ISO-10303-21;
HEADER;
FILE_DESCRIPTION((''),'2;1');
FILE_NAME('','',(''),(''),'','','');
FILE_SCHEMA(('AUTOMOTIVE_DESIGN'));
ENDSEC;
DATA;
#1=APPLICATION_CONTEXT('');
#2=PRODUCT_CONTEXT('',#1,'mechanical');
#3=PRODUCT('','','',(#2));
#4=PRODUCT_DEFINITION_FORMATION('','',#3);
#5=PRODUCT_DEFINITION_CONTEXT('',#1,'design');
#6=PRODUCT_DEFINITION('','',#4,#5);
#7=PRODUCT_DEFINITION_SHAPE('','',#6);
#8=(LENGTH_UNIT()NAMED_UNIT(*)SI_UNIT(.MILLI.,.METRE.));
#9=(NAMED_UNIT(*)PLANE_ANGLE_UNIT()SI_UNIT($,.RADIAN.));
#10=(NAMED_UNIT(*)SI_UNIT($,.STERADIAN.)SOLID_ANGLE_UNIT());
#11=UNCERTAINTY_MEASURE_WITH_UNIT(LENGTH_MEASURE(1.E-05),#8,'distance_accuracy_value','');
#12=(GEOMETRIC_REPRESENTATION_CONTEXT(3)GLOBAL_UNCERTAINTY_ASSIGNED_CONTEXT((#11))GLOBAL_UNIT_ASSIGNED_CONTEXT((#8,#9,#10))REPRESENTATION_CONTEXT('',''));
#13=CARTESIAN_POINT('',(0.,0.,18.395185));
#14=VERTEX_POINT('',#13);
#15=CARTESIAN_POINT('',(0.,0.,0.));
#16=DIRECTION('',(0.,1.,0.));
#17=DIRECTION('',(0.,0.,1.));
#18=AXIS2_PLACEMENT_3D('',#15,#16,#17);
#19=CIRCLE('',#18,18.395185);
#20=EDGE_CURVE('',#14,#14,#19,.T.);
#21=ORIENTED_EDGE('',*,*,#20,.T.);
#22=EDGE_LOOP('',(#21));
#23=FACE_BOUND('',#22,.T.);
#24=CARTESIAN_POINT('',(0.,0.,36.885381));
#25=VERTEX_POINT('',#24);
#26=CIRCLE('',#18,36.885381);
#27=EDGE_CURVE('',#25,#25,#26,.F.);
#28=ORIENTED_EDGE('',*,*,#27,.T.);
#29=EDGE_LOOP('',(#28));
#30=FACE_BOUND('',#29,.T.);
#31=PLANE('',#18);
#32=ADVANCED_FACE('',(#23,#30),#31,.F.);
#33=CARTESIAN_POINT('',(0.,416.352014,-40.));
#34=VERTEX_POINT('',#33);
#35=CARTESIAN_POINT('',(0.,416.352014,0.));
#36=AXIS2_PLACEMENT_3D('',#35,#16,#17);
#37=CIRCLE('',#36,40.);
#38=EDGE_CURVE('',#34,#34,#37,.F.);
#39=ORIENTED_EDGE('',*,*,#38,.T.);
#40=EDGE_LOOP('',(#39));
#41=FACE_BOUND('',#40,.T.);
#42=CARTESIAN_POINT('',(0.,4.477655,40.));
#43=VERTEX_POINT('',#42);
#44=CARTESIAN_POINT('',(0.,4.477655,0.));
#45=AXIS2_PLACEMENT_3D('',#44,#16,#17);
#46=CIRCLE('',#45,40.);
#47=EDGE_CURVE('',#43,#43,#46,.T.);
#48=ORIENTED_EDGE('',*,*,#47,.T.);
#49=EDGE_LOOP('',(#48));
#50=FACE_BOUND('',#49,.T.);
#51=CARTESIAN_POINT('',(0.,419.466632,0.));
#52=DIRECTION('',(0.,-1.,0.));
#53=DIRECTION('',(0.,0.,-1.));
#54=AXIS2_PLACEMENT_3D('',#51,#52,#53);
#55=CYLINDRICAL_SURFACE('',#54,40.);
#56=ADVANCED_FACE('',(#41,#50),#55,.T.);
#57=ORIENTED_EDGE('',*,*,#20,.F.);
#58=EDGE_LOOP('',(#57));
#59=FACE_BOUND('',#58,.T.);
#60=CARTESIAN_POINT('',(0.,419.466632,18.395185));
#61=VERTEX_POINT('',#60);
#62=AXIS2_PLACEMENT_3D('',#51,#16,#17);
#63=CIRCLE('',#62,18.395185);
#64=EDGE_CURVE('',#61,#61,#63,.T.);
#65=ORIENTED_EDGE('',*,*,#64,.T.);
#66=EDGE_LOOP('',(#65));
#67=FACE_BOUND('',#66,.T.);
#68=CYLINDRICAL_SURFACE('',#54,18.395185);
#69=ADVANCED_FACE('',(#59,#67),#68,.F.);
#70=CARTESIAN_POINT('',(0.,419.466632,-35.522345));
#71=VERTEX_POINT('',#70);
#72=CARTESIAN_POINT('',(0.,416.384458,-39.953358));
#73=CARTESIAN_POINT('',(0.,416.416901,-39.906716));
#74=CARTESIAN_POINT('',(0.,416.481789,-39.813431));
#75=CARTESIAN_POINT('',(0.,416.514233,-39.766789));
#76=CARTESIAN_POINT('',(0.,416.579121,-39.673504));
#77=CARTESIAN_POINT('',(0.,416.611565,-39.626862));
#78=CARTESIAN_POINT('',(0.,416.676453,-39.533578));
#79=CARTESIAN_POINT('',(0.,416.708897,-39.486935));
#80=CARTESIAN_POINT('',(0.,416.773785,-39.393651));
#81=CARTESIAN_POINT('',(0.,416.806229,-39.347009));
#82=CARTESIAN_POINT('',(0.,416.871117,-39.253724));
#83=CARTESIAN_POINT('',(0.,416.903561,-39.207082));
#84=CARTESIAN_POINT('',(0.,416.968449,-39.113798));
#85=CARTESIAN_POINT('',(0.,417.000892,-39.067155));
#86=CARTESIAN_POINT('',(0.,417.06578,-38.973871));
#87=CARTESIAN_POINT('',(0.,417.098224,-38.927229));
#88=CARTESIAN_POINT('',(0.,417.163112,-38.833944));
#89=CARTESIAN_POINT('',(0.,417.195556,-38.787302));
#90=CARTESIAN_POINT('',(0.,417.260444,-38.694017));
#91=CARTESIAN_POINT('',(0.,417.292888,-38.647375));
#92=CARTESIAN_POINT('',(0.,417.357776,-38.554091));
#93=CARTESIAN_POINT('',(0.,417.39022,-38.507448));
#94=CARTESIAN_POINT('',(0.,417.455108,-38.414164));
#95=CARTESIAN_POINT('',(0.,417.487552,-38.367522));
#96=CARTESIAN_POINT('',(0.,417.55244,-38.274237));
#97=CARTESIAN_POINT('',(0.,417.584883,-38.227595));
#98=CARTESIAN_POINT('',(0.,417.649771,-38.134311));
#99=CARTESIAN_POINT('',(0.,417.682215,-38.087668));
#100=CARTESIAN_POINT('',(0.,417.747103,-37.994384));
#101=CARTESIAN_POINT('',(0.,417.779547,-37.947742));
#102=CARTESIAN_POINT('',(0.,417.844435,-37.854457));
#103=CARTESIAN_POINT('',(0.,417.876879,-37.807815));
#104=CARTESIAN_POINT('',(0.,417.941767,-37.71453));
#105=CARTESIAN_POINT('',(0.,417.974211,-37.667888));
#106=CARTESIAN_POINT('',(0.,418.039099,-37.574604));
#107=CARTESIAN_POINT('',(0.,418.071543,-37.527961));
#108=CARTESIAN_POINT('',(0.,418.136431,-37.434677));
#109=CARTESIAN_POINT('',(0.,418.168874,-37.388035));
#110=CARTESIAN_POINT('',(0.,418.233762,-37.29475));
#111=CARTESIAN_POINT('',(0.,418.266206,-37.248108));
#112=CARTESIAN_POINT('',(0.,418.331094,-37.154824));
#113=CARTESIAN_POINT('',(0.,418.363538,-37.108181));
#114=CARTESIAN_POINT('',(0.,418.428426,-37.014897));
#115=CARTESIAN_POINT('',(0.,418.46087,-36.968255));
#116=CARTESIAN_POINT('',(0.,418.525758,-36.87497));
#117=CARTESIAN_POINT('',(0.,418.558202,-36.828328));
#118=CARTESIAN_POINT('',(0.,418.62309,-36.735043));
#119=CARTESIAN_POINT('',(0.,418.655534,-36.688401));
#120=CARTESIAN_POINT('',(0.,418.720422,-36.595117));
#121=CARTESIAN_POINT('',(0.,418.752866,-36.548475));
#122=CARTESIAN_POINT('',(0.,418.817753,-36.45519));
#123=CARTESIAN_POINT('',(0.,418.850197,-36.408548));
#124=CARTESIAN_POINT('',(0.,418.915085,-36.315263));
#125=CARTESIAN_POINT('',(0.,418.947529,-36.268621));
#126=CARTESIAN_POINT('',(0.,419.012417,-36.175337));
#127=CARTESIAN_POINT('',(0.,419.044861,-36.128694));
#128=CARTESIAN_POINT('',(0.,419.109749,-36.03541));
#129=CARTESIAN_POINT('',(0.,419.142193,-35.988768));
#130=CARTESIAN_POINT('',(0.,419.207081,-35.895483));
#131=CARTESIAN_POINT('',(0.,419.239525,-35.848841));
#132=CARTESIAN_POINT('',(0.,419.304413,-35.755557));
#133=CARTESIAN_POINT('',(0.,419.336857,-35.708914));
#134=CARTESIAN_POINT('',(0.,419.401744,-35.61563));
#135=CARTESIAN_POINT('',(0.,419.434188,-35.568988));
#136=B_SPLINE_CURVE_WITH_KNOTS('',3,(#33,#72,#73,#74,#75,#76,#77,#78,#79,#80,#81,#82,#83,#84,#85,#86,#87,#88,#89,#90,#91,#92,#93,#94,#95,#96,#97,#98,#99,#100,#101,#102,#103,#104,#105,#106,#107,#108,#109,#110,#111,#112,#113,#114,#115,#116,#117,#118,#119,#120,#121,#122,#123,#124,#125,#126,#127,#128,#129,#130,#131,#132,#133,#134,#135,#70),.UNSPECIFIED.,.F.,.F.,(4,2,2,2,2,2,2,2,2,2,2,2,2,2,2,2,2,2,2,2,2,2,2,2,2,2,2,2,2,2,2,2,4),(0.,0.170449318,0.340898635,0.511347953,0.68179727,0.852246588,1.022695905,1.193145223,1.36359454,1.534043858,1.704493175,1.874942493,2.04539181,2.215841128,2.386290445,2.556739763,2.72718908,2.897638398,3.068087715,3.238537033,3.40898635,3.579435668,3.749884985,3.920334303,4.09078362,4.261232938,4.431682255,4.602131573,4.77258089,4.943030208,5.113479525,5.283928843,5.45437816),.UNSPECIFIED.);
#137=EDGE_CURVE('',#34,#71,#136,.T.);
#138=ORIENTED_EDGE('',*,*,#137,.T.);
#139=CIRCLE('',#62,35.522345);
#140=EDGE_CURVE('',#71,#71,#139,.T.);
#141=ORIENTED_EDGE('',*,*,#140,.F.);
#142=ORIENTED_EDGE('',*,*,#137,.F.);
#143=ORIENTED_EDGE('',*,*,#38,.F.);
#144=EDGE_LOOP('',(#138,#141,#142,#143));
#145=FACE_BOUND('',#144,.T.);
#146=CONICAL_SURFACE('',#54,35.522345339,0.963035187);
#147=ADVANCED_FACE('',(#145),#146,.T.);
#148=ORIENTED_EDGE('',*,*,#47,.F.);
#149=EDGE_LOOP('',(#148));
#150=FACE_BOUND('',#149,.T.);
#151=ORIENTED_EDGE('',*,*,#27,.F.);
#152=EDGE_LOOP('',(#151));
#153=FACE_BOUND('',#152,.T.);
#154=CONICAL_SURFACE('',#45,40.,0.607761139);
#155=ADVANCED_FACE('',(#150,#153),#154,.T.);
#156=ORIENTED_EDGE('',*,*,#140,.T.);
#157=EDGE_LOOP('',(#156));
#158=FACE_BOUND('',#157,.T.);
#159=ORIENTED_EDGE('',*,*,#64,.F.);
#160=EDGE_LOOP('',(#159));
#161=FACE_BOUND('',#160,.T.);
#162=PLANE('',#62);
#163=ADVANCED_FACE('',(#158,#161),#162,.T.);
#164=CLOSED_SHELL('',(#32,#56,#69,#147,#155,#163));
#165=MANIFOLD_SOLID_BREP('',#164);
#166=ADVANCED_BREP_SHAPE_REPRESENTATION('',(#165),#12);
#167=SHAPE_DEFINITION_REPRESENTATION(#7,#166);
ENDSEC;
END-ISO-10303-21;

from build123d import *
from OCP.BRepFilletAPI import BRepFilletAPI_MakeChamfer

# Parameters (mm, degrees)
SKETCH1_R           = 40
BOSS_EXTRUDE1_DEPTH = 419.4666323
SKETCH2_R           = 18.395184598
CUT_EXTRUDE1_DEPTH  = 424.263813257
CHAMFER1_SIZE       = 3.114618733
CHAMFER1_SIZE2      = 4.477654661


with BuildPart() as part:
    # Sketch1 → Boss-Extrude1 (new body)
    with BuildSketch(Plane(origin=(0, 0, 0), x_dir=(1, 0, 0), z_dir=(0, 1, 0))):
        Circle(SKETCH1_R)
    extrude(amount=BOSS_EXTRUDE1_DEPTH)

    # Sketch2 → Cut-Extrude1 (cut, through all)
    with BuildSketch(Plane(origin=(0, 0, 0), x_dir=(1, 0, 0), z_dir=(0, 1, 0))):
        Circle(SKETCH2_R)
    extrude(amount=CUT_EXTRUDE1_DEPTH, mode=Mode.SUBTRACT)

    # Chamfer1: one chamfer whose edges measure the first distance from different faces: ONE call of the kernel's chamfer builder (chamfer() names one face for all edges)
    chamfer1_edges_1 = [part.edges().sort_by_distance(p)[0] for p in [
        (-40, 419.4666323, 0),
    ]]
    chamfer1_side_1 = [part.faces().sort_by_distance(p)[0] for p in [
        (-40, 209.73331615, 0),
    ]]
    chamfer1_edges_2 = [part.edges().sort_by_distance(p)[0] for p in [
        (-40, 0, 0),
    ]]
    chamfer1_side_2 = [part.faces().sort_by_distance(p)[0] for p in [
        (-38.86862915, 0, 0),
    ]]
    chamfer1 = BRepFilletAPI_MakeChamfer(part.part.solid().wrapped)
    for e in chamfer1_edges_1:
        chamfer1.Add(CHAMFER1_SIZE, CHAMFER1_SIZE2, e.wrapped, chamfer1_side_1[0].wrapped)  # the first distance lies on this face
    for e in chamfer1_edges_2:
        chamfer1.Add(CHAMFER1_SIZE, CHAMFER1_SIZE2, e.wrapped, chamfer1_side_2[0].wrapped)  # the first distance lies on this face
    add(Compound.cast(chamfer1.Shape()), mode=Mode.REPLACE)


solid = part.part
